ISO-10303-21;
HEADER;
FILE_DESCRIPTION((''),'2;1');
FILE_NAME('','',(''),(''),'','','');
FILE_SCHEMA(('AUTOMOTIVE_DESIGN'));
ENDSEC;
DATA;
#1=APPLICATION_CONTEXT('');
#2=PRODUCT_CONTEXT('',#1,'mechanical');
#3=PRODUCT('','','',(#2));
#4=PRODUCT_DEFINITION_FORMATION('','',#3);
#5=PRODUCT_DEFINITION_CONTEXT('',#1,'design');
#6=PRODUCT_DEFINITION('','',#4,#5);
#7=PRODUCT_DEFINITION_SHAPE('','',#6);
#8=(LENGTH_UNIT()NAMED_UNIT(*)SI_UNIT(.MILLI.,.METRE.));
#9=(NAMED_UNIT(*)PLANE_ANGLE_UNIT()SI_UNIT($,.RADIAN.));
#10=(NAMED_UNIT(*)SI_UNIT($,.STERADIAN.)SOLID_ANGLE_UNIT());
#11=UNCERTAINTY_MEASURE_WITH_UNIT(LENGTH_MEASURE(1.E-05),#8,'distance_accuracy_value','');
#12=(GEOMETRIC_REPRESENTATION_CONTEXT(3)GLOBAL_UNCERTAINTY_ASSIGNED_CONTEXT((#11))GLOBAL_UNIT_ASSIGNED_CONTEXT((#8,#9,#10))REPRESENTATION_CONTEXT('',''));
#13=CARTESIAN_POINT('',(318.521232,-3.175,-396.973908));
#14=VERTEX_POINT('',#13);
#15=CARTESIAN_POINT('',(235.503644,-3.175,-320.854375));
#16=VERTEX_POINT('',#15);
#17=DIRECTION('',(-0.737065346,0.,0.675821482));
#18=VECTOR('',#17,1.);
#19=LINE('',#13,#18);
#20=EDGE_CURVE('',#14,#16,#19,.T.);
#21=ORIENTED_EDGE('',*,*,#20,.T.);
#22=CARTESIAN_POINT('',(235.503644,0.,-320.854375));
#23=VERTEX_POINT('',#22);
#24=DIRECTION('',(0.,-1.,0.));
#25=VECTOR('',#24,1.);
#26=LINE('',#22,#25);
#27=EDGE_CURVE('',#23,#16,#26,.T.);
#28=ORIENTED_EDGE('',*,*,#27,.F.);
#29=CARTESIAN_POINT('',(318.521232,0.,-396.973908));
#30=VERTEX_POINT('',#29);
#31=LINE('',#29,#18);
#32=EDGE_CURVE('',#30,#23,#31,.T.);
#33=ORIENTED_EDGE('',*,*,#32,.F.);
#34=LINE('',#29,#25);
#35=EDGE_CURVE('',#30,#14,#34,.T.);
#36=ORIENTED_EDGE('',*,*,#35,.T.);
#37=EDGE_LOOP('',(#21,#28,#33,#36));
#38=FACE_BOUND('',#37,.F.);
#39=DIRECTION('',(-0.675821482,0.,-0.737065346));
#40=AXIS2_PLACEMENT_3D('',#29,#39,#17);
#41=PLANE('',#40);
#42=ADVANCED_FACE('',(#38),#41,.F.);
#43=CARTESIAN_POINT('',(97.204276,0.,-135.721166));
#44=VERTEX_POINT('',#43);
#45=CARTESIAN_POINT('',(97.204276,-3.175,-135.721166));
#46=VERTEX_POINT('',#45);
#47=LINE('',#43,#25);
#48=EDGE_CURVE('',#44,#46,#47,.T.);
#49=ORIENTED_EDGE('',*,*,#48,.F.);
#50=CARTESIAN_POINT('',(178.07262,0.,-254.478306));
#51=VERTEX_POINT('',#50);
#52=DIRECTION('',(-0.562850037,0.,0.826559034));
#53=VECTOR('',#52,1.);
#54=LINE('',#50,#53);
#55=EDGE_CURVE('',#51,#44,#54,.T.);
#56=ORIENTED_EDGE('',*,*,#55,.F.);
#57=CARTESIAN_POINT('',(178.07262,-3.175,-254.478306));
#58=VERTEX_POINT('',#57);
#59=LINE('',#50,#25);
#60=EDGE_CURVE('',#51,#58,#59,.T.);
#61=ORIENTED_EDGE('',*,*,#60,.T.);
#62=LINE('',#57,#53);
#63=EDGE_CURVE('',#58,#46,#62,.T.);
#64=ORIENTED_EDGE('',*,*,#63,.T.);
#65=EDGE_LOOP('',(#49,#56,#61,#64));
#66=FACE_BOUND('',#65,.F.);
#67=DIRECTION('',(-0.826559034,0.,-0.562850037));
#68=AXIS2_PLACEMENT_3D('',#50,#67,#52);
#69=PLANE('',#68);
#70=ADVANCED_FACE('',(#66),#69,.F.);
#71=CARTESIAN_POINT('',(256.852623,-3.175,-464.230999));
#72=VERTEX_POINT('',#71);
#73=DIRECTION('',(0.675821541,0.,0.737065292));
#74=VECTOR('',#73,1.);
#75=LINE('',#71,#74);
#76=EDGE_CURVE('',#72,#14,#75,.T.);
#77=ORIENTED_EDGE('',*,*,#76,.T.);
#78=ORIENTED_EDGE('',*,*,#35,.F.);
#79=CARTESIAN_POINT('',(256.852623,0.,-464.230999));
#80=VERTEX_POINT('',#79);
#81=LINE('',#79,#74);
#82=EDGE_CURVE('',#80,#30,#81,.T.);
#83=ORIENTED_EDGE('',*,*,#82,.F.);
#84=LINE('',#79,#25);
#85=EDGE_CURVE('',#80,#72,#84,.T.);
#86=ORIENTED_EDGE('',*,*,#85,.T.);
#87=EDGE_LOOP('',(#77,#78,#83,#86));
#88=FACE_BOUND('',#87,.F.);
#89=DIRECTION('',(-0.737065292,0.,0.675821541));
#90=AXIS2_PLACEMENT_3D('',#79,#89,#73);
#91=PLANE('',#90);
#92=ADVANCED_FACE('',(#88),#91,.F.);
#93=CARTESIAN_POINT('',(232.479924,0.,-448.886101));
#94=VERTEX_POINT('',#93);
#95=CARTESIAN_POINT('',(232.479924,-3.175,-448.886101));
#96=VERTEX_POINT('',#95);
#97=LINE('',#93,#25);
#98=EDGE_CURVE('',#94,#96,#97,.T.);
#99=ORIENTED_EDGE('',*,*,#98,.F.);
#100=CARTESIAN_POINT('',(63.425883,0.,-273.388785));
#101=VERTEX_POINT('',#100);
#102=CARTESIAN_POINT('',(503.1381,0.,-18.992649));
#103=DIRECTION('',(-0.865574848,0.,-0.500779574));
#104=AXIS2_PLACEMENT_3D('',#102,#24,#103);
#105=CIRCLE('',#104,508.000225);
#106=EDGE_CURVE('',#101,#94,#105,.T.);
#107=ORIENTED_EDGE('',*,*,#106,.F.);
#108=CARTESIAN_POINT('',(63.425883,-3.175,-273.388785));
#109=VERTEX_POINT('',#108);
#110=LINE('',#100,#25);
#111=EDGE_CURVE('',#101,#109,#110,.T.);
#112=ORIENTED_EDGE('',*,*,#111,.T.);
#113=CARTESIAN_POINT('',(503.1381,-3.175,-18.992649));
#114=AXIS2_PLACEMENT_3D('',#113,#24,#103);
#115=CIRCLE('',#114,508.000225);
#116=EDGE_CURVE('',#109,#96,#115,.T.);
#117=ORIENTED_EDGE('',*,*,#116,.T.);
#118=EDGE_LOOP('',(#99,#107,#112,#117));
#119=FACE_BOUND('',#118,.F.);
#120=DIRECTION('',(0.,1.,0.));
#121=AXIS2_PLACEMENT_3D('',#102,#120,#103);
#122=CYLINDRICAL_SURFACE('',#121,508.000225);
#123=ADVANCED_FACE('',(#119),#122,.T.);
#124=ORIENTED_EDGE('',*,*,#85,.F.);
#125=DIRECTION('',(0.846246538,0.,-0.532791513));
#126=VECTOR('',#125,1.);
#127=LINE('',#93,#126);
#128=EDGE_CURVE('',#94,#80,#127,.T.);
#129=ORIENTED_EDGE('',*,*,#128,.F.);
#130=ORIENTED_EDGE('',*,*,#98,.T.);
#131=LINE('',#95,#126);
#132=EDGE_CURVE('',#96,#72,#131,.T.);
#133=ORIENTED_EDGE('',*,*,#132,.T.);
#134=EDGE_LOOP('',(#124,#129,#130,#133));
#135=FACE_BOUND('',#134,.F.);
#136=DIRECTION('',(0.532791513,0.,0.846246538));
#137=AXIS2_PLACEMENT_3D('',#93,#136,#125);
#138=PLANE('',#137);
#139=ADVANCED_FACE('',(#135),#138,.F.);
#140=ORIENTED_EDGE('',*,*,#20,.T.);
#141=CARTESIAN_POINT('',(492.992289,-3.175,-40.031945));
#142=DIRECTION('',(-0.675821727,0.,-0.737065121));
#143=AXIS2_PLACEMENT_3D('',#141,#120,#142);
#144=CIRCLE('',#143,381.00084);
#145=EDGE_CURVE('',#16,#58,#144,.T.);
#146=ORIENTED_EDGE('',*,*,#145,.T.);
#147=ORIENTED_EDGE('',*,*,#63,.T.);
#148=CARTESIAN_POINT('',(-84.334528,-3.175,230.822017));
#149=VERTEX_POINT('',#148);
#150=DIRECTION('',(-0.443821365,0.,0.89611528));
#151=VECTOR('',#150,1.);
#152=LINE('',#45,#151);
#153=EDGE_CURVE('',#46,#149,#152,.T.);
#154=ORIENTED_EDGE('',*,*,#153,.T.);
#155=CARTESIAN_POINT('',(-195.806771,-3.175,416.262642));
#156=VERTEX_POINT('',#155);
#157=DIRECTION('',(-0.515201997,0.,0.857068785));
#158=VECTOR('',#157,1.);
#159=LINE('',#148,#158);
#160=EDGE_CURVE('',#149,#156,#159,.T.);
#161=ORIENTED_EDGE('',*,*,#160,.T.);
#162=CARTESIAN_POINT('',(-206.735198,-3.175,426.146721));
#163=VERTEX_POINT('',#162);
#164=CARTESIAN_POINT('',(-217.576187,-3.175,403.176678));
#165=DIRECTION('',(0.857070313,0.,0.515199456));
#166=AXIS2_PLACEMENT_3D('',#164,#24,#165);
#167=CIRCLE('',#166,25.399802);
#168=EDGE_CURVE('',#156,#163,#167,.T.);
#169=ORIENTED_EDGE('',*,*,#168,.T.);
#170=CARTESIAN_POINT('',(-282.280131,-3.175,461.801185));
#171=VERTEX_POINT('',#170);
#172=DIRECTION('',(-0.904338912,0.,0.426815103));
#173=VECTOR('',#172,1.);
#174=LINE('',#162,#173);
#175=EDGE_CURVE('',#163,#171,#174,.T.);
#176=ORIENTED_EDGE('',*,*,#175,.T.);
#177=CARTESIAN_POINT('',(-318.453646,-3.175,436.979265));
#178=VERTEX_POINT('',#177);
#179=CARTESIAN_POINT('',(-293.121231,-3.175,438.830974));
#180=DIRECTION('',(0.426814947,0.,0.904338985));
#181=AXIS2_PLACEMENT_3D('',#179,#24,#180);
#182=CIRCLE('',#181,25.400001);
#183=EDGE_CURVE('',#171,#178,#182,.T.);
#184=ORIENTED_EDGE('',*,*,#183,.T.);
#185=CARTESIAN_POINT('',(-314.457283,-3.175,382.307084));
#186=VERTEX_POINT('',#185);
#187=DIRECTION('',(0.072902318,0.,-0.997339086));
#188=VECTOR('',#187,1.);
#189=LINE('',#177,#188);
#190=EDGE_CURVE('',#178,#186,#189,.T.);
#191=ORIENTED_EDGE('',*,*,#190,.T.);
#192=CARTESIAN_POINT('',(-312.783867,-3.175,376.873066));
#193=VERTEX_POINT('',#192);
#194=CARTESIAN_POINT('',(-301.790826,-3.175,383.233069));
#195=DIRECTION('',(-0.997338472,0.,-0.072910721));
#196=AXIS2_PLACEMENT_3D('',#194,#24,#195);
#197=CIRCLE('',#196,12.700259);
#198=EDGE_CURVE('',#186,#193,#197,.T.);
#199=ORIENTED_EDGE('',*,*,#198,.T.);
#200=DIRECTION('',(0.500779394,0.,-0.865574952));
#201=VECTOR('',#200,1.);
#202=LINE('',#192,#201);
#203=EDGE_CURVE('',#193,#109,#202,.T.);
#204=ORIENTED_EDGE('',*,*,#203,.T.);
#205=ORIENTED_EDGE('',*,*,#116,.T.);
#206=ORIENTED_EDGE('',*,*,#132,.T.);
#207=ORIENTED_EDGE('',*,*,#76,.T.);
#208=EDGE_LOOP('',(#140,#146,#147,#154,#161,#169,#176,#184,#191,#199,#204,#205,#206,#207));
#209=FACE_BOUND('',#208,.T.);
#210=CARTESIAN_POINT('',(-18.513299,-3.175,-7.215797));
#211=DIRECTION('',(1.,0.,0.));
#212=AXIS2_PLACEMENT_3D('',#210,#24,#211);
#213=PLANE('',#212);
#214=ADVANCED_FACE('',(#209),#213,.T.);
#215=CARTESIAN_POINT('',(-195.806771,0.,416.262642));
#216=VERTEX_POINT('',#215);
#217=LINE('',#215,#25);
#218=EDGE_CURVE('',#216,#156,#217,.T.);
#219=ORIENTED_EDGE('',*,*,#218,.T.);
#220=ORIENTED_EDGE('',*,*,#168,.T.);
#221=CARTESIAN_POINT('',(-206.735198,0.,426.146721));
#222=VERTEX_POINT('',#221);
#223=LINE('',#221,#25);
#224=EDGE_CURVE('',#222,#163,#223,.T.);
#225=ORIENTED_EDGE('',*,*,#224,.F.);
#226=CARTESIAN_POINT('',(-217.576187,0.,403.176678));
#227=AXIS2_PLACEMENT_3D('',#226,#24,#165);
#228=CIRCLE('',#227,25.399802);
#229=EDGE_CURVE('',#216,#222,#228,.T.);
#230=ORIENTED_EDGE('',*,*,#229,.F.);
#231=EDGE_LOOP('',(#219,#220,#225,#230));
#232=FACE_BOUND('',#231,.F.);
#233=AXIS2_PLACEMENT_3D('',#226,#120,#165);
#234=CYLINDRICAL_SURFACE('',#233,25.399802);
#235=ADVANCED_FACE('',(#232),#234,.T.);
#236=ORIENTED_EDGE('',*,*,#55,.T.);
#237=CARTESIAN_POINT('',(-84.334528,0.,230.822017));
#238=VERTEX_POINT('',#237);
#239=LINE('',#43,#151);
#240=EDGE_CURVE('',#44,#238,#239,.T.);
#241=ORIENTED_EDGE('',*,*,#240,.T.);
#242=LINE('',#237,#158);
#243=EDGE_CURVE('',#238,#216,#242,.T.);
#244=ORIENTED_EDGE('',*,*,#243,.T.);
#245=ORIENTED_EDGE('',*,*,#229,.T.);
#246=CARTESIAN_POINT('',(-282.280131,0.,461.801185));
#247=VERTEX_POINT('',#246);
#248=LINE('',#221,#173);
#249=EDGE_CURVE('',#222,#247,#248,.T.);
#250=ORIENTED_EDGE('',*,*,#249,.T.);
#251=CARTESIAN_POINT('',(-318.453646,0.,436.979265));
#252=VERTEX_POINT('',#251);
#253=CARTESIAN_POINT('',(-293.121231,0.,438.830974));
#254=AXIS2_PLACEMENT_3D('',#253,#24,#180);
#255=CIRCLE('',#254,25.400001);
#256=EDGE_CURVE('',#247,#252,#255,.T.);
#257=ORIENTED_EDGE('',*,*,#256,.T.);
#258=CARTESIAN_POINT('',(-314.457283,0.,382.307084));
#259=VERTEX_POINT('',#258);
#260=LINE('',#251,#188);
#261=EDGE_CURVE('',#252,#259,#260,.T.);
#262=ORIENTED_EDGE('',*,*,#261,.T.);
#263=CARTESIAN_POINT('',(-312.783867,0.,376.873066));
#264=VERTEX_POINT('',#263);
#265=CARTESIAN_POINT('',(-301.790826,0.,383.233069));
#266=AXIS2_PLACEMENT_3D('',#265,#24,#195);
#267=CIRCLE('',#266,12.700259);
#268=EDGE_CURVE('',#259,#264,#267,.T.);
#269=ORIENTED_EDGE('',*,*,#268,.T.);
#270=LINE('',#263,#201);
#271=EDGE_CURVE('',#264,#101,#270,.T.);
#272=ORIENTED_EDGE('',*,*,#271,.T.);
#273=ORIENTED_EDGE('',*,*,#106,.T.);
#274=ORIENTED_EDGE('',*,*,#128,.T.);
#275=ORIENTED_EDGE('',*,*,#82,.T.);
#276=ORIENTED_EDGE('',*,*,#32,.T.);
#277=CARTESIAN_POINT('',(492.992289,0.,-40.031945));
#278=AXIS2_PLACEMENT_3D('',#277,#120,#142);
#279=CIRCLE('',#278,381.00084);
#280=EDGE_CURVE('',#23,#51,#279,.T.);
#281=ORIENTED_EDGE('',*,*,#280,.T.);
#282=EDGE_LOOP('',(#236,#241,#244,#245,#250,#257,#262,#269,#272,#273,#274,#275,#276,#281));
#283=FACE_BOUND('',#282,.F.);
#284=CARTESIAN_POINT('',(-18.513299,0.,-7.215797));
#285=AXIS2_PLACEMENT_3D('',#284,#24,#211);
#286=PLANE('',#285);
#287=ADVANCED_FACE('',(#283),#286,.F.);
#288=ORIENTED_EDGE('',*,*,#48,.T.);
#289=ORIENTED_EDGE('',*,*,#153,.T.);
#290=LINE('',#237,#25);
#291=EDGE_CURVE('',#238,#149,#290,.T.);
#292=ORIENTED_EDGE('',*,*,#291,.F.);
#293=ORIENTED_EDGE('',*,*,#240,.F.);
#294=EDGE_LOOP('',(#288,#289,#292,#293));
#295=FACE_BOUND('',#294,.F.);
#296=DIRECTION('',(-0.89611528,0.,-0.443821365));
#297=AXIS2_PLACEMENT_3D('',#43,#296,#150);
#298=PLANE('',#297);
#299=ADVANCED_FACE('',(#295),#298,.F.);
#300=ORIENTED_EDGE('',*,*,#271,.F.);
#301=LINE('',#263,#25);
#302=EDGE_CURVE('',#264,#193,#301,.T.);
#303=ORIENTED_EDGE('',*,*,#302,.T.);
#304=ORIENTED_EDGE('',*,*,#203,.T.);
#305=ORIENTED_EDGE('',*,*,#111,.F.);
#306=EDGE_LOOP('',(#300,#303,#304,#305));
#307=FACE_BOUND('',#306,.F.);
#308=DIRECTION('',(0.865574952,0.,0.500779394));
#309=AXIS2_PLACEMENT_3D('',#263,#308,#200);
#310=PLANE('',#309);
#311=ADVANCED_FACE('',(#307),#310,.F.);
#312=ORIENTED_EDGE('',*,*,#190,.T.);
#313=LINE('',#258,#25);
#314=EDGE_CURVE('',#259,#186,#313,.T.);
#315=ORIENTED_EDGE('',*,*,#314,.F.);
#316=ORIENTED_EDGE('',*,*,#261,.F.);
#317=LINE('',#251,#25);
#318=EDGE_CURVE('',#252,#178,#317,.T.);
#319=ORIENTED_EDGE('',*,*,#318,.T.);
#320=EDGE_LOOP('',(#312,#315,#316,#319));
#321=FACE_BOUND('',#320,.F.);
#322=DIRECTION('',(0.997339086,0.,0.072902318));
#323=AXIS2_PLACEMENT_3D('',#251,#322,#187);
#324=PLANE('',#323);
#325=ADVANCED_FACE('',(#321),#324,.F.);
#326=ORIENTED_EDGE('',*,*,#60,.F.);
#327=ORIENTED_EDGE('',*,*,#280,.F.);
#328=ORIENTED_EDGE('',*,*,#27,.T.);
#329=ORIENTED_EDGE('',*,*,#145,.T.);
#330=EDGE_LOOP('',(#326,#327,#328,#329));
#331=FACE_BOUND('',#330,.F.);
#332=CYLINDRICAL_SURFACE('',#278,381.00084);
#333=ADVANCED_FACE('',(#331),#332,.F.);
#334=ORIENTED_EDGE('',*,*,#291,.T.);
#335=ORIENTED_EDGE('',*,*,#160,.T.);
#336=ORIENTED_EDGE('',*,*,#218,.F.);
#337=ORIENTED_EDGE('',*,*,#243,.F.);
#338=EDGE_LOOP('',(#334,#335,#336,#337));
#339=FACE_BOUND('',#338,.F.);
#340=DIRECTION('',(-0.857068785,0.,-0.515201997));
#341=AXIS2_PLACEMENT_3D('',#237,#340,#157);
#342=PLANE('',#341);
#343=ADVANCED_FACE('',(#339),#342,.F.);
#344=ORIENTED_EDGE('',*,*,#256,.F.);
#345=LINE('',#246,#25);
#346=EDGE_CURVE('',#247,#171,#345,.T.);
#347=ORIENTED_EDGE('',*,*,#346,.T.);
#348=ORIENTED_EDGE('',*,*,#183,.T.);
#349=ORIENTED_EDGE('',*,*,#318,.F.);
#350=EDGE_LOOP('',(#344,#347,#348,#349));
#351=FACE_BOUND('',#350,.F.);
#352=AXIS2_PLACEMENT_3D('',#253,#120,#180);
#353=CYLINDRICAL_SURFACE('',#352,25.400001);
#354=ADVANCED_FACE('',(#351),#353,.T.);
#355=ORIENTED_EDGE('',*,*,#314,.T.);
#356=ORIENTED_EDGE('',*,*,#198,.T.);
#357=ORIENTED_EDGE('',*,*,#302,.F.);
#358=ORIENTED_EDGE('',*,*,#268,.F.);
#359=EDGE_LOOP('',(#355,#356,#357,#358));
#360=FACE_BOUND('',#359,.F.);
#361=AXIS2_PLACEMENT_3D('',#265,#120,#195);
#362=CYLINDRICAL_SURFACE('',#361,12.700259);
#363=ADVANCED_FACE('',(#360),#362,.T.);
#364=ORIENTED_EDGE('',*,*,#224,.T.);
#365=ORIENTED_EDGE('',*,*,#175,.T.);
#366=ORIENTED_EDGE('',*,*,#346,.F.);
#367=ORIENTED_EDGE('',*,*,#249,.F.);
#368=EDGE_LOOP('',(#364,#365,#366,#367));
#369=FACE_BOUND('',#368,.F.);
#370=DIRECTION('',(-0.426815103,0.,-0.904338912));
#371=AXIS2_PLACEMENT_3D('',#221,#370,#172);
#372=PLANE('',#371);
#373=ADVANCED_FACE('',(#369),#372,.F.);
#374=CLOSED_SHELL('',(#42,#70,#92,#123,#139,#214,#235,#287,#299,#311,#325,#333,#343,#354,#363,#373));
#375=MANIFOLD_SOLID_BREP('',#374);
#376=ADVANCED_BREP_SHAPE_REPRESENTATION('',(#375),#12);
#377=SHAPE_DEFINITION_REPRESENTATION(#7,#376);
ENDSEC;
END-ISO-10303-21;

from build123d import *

# Parameters (mm, degrees)
F1_DEPTH = 3.175


# Not quite as in the source:
# - ends of sketch curves that miss each other by under 0.0002 mm in the source are joined


with BuildPart() as f1:
    # F0 (on Front) → F1 (new body)
    with BuildSketch(Plane.XZ):
        with BuildLine():
            Line((256.8526232, -464.2309994), (318.5212324, -396.9739076))
            Line((318.5212324, -396.9739076), (235.5036438, -320.8543748))
            ThreePointArc((235.5036438, -320.8543748), (204.8703266123, -289.3256959733), (178.0726202767, -254.4783059859))
            Line((178.0726202767, -254.4783059859), (97.204276, -135.7211662))
            Line((97.204276, -135.7211662), (-84.3345278, 230.8220174))
            Line((-84.3345278, 230.8220174), (-195.8067712, 416.2626422))
            ThreePointArc((-195.8067712, 416.2626422), (-200.5384813212, 422.0145789545), (-206.7351977857, 426.1467211829))
            Line((-206.7351977857, 426.1467211829), (-282.2801314, 461.8011846))
            ThreePointArc((-282.2801314, 461.8011846), (-307.4924345817, 459.774434742), (-318.4536458896, 436.9792648454))
            Line((-318.4536458896, 436.9792648454), (-314.4572832, 382.307084))
            ThreePointArc((-314.4572832, 382.307084), (-313.9285810002, 379.4952234768), (-312.7838670978, 376.873066496))
            Line((-312.7838670978, 376.873066496), (63.4258828, -273.3887852))
            ThreePointArc((63.4258828, -273.3887852), (137.2742586369, -371.4240291313), (232.4799240247, -448.8861008552))
            Line((232.4799240247, -448.8861008552), (256.8526232, -464.2309994))
        make_face()
    extrude(amount=F1_DEPTH)


solid = f1.part
